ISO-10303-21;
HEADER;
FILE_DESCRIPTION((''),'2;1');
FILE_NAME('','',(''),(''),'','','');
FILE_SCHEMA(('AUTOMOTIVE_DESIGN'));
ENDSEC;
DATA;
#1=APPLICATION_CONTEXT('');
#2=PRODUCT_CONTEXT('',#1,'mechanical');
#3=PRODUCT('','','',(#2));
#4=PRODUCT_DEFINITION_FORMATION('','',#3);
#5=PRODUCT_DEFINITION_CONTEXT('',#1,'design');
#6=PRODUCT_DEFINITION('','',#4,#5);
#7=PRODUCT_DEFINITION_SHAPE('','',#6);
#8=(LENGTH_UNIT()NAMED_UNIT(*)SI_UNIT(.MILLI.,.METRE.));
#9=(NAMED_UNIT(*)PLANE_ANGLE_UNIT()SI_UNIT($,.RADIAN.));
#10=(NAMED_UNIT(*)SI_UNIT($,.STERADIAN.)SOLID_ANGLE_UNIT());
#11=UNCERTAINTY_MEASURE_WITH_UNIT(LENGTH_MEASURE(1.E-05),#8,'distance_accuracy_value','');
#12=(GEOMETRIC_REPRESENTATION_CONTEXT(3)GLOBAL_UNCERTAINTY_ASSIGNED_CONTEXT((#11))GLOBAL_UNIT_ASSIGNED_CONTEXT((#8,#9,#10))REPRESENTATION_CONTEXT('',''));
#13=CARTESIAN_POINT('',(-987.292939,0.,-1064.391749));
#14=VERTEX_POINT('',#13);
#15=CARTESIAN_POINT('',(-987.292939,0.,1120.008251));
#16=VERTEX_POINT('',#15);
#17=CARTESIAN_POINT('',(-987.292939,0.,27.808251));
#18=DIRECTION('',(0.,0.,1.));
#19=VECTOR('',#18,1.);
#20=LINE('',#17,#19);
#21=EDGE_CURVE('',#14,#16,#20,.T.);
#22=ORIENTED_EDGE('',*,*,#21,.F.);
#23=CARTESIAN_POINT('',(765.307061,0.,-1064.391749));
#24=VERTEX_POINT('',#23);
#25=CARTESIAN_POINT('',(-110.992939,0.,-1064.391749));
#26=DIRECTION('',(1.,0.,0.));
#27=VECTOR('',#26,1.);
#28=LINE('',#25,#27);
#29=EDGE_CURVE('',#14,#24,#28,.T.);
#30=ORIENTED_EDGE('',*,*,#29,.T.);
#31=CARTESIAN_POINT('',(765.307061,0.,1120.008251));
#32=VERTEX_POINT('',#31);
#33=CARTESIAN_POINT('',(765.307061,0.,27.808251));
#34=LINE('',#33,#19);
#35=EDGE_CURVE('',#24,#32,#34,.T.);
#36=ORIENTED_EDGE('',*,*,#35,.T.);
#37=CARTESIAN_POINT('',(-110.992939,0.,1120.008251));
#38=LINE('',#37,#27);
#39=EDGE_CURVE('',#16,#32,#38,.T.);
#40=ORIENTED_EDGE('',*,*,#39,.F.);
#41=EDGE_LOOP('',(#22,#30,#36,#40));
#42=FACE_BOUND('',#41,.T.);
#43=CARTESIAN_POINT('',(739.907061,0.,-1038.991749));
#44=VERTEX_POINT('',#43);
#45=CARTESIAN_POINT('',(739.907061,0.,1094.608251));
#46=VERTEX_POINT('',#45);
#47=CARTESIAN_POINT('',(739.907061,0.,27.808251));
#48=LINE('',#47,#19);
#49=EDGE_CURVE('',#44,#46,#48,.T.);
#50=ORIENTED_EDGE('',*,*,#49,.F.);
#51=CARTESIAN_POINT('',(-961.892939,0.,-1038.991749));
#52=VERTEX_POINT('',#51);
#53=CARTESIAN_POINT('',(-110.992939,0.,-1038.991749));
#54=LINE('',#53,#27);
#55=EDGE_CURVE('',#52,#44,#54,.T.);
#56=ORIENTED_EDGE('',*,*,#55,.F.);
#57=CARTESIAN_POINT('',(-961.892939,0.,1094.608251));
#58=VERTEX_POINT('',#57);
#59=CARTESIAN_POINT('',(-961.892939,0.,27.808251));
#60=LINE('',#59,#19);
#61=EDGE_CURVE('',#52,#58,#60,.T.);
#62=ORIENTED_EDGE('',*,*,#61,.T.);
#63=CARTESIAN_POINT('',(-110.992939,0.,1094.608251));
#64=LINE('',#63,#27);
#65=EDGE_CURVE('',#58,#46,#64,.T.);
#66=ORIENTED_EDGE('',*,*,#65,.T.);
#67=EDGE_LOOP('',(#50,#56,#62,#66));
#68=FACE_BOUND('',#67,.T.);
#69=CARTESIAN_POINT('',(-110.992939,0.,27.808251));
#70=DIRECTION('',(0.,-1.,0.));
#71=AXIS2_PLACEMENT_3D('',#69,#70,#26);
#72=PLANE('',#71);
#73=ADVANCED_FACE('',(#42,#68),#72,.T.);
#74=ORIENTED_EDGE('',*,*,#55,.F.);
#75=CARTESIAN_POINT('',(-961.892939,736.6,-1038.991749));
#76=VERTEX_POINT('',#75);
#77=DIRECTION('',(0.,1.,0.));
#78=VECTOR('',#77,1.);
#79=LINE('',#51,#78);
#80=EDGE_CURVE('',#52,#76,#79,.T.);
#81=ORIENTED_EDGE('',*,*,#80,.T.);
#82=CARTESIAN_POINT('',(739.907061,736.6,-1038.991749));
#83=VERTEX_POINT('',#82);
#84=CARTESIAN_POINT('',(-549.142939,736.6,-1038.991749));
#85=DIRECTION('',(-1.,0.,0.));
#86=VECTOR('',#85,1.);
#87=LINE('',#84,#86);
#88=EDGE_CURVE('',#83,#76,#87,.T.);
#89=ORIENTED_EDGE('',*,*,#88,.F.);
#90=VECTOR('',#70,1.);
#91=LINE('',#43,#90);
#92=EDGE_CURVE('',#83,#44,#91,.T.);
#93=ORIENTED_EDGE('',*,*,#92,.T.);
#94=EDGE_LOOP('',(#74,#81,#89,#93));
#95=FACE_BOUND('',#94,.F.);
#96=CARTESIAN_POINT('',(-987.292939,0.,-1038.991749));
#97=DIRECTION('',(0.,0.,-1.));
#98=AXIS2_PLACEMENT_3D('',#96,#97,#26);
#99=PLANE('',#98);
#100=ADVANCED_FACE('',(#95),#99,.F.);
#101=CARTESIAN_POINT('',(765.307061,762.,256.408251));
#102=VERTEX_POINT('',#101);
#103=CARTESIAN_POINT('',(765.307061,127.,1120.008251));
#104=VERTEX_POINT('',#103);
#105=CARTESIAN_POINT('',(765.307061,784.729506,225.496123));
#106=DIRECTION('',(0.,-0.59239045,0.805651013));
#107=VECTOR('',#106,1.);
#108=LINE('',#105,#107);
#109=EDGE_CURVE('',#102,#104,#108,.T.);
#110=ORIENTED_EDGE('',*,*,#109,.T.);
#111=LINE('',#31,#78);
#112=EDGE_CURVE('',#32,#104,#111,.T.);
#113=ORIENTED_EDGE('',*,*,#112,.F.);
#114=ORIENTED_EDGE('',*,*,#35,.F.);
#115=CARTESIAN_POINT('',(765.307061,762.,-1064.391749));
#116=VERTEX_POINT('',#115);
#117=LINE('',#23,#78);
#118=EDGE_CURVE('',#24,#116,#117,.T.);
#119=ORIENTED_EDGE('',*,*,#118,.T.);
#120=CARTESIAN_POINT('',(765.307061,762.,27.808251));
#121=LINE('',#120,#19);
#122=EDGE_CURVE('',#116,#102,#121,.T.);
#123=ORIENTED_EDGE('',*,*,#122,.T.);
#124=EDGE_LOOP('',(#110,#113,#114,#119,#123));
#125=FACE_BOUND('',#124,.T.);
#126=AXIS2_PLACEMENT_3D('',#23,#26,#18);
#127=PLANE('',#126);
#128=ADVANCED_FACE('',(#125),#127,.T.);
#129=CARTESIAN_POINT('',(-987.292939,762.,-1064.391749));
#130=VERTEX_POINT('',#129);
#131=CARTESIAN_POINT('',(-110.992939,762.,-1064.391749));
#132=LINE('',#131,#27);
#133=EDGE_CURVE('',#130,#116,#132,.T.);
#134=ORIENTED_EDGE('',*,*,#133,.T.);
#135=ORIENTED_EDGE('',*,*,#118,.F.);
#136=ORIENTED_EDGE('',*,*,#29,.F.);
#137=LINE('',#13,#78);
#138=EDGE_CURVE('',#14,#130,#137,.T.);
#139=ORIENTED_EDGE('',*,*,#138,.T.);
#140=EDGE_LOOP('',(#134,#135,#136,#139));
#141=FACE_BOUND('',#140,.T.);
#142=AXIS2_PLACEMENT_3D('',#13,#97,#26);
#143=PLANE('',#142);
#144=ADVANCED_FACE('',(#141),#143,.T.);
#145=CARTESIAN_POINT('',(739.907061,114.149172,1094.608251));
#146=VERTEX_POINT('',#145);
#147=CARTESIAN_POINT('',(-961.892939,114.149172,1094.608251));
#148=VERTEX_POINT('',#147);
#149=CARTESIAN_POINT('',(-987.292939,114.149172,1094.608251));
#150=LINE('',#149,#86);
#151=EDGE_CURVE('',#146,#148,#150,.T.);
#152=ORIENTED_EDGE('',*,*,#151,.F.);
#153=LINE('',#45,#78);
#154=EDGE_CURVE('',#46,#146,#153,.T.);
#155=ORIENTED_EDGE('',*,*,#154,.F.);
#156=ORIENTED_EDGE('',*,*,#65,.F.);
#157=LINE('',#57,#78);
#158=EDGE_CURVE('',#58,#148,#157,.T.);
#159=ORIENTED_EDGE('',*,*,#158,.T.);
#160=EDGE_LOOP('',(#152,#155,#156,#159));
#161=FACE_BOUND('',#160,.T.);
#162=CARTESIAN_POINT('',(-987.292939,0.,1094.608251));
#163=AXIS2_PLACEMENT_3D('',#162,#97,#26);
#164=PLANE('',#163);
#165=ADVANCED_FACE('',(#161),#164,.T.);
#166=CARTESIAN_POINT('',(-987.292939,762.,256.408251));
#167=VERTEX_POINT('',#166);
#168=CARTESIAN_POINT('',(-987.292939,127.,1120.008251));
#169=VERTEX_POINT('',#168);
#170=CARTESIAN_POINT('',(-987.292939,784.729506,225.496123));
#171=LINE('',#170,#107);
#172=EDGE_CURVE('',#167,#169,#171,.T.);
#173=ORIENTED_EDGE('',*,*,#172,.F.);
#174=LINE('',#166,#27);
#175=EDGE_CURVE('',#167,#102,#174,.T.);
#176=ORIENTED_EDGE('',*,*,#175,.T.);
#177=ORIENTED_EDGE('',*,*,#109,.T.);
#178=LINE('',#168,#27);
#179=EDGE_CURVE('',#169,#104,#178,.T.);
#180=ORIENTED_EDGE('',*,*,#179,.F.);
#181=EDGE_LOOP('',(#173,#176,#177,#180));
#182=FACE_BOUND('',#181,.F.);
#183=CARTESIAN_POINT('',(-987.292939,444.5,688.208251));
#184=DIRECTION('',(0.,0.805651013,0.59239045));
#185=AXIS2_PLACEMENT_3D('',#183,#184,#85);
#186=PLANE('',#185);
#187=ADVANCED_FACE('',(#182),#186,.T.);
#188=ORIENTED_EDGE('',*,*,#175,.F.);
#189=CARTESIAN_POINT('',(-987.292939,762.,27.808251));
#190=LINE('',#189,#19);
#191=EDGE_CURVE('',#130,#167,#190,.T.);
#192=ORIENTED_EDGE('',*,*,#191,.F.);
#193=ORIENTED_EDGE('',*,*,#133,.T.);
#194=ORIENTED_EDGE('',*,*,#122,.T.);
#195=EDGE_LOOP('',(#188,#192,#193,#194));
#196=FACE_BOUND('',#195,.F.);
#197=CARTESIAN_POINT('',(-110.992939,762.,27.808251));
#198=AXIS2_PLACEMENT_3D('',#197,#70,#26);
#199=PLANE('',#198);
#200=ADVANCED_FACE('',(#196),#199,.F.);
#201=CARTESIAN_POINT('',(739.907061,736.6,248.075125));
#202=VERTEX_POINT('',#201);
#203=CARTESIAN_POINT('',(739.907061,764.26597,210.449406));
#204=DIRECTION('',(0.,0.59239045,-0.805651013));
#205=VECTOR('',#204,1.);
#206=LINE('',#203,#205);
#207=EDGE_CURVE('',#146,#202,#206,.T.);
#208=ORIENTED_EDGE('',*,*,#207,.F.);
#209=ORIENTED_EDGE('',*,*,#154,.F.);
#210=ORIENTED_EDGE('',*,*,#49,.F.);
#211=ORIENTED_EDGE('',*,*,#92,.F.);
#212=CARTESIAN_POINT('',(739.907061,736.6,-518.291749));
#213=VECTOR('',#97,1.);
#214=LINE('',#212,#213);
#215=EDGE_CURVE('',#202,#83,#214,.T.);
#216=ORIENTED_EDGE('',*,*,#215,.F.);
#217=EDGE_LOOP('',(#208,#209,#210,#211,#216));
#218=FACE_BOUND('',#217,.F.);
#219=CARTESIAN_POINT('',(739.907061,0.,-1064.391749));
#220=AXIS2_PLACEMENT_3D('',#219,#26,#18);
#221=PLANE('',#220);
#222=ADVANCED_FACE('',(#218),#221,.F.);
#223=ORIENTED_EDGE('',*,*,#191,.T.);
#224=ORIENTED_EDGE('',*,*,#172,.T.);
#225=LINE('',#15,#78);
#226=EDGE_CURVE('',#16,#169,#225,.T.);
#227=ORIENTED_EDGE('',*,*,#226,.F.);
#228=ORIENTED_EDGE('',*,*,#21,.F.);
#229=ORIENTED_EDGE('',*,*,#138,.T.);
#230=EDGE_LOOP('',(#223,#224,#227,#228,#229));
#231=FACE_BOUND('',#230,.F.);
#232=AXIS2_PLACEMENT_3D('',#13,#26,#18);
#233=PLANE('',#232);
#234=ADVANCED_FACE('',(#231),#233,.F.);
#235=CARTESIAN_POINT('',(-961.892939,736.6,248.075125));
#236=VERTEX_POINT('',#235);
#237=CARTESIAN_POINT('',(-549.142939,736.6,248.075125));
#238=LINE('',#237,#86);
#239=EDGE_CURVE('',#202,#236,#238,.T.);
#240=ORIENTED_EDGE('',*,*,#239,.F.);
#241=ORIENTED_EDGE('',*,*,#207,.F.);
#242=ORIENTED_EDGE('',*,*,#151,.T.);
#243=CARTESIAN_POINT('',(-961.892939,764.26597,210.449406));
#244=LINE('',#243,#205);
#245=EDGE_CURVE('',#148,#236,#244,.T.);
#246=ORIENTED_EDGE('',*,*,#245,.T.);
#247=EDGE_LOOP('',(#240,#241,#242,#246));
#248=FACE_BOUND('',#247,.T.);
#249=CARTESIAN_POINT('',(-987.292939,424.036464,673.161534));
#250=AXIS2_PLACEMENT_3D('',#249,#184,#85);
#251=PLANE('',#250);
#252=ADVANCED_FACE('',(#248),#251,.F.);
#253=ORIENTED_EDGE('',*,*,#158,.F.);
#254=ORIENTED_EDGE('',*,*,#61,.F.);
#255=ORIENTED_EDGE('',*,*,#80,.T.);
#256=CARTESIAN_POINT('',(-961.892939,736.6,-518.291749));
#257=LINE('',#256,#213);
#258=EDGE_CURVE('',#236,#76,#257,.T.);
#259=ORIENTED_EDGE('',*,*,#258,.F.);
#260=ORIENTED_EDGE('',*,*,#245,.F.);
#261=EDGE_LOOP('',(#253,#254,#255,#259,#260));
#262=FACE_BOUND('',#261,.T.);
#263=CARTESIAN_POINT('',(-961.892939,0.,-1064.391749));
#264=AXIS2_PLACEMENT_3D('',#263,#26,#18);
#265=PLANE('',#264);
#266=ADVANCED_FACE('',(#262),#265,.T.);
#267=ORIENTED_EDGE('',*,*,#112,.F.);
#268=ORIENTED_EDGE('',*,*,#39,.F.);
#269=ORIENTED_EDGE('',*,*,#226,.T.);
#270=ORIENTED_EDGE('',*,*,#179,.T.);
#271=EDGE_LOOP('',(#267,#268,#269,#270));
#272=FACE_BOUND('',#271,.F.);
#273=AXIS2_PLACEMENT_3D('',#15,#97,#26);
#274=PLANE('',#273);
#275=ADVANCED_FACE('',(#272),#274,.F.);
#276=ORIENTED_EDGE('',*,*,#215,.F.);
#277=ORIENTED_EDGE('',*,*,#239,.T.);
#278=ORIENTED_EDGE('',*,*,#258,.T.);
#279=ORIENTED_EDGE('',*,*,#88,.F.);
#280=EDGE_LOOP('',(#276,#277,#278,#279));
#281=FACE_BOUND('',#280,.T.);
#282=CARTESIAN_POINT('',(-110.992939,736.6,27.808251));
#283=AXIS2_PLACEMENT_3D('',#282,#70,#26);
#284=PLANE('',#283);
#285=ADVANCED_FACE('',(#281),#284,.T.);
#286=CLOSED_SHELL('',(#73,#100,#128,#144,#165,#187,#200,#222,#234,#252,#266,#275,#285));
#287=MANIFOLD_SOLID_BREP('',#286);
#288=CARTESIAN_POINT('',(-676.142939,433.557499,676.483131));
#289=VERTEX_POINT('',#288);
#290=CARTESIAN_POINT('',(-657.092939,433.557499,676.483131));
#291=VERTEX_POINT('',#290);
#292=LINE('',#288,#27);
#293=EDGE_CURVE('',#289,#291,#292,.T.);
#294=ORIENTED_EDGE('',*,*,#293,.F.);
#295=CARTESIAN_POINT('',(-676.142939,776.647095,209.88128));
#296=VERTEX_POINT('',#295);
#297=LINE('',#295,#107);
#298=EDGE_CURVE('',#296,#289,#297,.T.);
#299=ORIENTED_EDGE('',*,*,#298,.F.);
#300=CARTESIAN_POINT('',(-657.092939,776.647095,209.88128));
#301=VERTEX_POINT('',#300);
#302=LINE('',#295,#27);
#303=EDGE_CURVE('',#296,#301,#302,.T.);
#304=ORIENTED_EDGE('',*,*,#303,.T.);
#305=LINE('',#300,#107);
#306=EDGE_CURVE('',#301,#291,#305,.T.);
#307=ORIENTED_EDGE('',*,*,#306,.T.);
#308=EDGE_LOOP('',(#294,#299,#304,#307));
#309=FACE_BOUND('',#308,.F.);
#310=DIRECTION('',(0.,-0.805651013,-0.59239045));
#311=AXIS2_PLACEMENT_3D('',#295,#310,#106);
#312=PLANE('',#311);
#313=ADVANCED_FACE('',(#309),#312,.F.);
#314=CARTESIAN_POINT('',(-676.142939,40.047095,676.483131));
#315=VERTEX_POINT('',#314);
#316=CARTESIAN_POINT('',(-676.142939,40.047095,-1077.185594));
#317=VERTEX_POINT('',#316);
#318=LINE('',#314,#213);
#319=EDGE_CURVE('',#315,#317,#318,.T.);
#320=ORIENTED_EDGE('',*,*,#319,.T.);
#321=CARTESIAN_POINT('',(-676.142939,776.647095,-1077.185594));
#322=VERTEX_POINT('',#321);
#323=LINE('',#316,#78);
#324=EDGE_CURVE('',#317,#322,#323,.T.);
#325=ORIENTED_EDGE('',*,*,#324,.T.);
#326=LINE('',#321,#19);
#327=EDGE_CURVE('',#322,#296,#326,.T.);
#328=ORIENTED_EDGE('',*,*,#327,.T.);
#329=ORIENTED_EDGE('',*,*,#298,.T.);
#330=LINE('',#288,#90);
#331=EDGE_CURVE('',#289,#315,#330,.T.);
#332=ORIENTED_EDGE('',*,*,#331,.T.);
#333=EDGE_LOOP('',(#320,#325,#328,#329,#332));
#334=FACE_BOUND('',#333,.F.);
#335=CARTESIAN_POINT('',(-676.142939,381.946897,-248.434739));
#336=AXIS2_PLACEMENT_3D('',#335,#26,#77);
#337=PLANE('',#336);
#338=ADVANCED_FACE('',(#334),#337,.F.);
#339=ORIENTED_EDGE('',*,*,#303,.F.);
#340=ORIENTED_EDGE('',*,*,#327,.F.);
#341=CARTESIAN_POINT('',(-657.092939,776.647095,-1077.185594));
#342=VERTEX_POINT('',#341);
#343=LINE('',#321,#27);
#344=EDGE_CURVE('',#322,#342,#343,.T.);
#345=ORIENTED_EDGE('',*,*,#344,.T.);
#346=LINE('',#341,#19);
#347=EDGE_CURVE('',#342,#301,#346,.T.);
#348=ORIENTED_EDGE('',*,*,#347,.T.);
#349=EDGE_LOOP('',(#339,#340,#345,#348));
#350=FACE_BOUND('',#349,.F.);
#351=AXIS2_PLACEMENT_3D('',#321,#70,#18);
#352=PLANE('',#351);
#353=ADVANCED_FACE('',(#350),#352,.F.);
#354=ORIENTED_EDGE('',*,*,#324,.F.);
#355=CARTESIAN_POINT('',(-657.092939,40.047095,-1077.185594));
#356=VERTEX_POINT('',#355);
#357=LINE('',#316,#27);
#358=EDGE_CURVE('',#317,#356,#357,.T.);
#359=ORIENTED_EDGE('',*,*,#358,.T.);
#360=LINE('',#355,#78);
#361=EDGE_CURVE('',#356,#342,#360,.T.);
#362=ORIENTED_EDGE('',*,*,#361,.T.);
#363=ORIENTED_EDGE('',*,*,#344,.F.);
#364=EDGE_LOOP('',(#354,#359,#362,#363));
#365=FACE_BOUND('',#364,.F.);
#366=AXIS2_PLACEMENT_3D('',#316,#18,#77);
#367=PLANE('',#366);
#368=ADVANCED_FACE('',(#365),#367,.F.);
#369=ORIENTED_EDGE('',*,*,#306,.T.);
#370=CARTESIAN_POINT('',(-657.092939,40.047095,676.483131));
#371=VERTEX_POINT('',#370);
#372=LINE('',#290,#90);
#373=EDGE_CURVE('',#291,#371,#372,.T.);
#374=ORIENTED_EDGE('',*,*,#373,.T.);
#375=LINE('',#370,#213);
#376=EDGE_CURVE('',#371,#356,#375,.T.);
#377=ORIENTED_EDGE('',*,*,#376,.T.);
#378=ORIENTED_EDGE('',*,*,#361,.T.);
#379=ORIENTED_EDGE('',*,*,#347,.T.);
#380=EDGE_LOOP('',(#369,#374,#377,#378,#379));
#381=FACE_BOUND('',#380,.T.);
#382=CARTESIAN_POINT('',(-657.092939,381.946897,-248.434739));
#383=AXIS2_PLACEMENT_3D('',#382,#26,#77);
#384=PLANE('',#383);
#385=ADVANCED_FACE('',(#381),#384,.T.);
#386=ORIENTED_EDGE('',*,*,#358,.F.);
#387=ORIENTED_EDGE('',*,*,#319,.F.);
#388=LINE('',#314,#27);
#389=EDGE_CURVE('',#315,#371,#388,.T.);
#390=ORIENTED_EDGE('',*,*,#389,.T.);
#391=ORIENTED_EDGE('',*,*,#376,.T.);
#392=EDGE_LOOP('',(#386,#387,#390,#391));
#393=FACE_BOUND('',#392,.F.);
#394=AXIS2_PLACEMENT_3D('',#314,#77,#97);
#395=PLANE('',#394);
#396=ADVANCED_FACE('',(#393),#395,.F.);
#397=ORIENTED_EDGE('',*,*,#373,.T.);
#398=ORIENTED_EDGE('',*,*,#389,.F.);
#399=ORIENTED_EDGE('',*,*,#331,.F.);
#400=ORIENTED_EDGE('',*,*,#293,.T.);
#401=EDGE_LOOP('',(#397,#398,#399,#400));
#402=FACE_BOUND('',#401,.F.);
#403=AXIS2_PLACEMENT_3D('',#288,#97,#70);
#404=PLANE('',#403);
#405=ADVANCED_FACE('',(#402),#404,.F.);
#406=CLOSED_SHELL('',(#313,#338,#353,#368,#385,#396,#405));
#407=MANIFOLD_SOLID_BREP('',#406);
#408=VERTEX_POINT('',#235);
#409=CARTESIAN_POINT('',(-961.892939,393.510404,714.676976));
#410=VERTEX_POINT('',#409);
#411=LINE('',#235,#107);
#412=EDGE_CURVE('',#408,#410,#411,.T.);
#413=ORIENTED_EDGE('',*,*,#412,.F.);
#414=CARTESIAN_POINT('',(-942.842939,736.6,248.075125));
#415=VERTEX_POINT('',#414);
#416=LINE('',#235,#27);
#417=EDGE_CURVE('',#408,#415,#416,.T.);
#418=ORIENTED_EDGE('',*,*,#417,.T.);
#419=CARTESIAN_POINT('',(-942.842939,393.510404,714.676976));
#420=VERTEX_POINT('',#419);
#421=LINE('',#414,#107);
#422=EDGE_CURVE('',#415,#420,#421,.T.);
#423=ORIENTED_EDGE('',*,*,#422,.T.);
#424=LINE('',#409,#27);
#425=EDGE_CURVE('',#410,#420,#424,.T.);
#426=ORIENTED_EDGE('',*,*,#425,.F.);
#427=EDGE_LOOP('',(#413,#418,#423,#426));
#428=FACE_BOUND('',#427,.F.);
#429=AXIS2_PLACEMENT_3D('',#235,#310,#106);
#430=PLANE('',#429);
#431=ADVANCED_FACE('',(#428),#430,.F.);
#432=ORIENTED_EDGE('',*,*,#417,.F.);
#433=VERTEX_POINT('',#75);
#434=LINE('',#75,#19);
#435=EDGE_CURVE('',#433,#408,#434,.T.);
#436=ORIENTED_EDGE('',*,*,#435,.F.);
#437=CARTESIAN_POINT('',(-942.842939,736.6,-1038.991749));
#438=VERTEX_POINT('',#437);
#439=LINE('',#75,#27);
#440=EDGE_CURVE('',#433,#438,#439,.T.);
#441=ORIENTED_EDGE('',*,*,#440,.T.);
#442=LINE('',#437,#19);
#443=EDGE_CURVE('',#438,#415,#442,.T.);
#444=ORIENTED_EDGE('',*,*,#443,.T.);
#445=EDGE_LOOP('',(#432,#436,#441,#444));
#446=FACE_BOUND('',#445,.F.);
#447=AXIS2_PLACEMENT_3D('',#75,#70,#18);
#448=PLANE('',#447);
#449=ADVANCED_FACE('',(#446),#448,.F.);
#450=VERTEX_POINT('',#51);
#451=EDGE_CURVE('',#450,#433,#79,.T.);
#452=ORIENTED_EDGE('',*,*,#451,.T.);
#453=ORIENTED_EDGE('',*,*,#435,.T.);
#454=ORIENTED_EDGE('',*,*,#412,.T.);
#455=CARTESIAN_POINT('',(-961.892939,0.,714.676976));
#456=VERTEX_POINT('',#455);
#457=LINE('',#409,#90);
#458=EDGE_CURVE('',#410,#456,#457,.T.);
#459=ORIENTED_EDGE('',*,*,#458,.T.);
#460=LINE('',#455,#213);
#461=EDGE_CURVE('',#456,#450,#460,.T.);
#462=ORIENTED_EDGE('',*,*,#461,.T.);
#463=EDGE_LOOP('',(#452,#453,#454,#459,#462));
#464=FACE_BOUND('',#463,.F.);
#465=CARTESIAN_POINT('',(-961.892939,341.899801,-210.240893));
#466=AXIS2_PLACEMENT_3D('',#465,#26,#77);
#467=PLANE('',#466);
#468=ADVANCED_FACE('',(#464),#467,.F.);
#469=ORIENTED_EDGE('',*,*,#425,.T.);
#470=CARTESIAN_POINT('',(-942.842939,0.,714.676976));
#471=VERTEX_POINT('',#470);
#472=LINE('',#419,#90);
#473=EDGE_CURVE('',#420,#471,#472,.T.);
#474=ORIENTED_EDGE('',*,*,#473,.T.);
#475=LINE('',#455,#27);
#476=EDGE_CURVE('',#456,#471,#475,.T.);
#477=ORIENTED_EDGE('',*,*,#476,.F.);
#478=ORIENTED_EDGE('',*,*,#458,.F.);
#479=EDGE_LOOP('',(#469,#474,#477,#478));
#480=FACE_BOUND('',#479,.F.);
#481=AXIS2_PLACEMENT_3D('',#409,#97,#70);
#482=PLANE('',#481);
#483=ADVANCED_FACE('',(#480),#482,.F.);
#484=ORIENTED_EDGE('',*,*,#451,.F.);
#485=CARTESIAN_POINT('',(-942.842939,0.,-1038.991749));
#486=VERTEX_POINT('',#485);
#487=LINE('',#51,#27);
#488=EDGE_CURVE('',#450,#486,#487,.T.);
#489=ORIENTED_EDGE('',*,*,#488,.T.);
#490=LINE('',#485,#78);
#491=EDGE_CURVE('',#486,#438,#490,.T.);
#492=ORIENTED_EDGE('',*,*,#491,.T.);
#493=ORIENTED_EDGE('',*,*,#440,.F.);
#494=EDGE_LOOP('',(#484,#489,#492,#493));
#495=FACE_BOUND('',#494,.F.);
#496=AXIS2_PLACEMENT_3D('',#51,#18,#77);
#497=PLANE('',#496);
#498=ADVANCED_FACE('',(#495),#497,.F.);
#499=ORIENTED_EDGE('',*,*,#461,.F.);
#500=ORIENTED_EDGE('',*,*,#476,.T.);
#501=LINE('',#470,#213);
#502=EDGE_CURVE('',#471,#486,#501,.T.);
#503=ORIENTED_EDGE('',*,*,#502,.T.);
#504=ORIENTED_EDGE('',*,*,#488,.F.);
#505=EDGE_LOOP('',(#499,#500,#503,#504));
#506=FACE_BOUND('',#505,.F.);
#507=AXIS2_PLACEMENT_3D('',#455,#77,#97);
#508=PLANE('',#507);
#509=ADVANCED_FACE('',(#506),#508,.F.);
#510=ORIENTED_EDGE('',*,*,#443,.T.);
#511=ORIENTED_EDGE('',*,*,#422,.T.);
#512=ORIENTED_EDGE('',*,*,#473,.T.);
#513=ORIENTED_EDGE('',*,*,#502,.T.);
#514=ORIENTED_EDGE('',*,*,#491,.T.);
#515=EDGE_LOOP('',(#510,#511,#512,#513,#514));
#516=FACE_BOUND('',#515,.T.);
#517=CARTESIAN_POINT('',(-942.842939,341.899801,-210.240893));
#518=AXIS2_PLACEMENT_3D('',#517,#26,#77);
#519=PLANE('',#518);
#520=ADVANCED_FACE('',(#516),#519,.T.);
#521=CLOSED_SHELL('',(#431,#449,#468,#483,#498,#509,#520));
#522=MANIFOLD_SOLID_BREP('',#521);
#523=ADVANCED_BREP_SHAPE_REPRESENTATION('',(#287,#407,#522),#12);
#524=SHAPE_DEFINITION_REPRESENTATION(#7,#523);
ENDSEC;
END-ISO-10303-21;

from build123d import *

# Parameters (mm, degrees)
F0_W     = 1752.6
F0_H     = 2184.4
F1_DEPTH = 762
F2_SIZE2 = 635
F2_SIZE  = 863.6
F3_T     = -25.4
F5_DEPTH = 19.05
F8_DEPTH = 19.05


with BuildPart() as f1:
    # F0 (on Front) → F1 (new body)
    with BuildSketch(Plane.XZ):
        with Locations((-110.9929393764, 27.8082511663)):
            Rectangle(F0_W, F0_H)
    extrude(amount=-F1_DEPTH)

    # F2
    f2_edges = [f1.edges().sort_by_distance(p)[0] for p in [
        (-110.992939, 762, 1120.008251),
    ]]
    f2_side = f1.faces().sort_by_distance((-110.992939, 762, 27.808251))[0]
    chamfer(f2_edges, length=F2_SIZE, length2=F2_SIZE2, reference=f2_side)

    # F3
    f3_openings = [f1.faces().sort_by_distance(p)[0] for p in [
        (-110.992939, 0, 27.808251),
    ]]
    offset(amount=F3_T, openings=f3_openings)


with BuildPart() as f5:
    # F4 (on face) → F5 (new body)
    with BuildSketch(Plane.YZ.offset(-961.8929393764)):
        Polygon((736.6, -1038.9917488337), (736.6, 248.0751251433), (393.5104036319, 714.6769762039), (0, 714.6769762039), (0, -1038.9917488337), align=None)
    extrude(amount=F5_DEPTH)


with BuildPart() as f8:
    # F7 (on offset) → F8 (new body)
    with BuildSketch(Plane.YZ.offset(-676.1429393764)):
        Polygon((776.6470954039, -1077.1855942721), (776.6470954039, 209.8812797048), (433.5574990358, 676.4831307655), (40.0470954039, 676.4831307655), (40.0470954039, -1077.1855942721), align=None)
    extrude(amount=F8_DEPTH)


solid = Compound([f1.part, f5.part, f8.part])
